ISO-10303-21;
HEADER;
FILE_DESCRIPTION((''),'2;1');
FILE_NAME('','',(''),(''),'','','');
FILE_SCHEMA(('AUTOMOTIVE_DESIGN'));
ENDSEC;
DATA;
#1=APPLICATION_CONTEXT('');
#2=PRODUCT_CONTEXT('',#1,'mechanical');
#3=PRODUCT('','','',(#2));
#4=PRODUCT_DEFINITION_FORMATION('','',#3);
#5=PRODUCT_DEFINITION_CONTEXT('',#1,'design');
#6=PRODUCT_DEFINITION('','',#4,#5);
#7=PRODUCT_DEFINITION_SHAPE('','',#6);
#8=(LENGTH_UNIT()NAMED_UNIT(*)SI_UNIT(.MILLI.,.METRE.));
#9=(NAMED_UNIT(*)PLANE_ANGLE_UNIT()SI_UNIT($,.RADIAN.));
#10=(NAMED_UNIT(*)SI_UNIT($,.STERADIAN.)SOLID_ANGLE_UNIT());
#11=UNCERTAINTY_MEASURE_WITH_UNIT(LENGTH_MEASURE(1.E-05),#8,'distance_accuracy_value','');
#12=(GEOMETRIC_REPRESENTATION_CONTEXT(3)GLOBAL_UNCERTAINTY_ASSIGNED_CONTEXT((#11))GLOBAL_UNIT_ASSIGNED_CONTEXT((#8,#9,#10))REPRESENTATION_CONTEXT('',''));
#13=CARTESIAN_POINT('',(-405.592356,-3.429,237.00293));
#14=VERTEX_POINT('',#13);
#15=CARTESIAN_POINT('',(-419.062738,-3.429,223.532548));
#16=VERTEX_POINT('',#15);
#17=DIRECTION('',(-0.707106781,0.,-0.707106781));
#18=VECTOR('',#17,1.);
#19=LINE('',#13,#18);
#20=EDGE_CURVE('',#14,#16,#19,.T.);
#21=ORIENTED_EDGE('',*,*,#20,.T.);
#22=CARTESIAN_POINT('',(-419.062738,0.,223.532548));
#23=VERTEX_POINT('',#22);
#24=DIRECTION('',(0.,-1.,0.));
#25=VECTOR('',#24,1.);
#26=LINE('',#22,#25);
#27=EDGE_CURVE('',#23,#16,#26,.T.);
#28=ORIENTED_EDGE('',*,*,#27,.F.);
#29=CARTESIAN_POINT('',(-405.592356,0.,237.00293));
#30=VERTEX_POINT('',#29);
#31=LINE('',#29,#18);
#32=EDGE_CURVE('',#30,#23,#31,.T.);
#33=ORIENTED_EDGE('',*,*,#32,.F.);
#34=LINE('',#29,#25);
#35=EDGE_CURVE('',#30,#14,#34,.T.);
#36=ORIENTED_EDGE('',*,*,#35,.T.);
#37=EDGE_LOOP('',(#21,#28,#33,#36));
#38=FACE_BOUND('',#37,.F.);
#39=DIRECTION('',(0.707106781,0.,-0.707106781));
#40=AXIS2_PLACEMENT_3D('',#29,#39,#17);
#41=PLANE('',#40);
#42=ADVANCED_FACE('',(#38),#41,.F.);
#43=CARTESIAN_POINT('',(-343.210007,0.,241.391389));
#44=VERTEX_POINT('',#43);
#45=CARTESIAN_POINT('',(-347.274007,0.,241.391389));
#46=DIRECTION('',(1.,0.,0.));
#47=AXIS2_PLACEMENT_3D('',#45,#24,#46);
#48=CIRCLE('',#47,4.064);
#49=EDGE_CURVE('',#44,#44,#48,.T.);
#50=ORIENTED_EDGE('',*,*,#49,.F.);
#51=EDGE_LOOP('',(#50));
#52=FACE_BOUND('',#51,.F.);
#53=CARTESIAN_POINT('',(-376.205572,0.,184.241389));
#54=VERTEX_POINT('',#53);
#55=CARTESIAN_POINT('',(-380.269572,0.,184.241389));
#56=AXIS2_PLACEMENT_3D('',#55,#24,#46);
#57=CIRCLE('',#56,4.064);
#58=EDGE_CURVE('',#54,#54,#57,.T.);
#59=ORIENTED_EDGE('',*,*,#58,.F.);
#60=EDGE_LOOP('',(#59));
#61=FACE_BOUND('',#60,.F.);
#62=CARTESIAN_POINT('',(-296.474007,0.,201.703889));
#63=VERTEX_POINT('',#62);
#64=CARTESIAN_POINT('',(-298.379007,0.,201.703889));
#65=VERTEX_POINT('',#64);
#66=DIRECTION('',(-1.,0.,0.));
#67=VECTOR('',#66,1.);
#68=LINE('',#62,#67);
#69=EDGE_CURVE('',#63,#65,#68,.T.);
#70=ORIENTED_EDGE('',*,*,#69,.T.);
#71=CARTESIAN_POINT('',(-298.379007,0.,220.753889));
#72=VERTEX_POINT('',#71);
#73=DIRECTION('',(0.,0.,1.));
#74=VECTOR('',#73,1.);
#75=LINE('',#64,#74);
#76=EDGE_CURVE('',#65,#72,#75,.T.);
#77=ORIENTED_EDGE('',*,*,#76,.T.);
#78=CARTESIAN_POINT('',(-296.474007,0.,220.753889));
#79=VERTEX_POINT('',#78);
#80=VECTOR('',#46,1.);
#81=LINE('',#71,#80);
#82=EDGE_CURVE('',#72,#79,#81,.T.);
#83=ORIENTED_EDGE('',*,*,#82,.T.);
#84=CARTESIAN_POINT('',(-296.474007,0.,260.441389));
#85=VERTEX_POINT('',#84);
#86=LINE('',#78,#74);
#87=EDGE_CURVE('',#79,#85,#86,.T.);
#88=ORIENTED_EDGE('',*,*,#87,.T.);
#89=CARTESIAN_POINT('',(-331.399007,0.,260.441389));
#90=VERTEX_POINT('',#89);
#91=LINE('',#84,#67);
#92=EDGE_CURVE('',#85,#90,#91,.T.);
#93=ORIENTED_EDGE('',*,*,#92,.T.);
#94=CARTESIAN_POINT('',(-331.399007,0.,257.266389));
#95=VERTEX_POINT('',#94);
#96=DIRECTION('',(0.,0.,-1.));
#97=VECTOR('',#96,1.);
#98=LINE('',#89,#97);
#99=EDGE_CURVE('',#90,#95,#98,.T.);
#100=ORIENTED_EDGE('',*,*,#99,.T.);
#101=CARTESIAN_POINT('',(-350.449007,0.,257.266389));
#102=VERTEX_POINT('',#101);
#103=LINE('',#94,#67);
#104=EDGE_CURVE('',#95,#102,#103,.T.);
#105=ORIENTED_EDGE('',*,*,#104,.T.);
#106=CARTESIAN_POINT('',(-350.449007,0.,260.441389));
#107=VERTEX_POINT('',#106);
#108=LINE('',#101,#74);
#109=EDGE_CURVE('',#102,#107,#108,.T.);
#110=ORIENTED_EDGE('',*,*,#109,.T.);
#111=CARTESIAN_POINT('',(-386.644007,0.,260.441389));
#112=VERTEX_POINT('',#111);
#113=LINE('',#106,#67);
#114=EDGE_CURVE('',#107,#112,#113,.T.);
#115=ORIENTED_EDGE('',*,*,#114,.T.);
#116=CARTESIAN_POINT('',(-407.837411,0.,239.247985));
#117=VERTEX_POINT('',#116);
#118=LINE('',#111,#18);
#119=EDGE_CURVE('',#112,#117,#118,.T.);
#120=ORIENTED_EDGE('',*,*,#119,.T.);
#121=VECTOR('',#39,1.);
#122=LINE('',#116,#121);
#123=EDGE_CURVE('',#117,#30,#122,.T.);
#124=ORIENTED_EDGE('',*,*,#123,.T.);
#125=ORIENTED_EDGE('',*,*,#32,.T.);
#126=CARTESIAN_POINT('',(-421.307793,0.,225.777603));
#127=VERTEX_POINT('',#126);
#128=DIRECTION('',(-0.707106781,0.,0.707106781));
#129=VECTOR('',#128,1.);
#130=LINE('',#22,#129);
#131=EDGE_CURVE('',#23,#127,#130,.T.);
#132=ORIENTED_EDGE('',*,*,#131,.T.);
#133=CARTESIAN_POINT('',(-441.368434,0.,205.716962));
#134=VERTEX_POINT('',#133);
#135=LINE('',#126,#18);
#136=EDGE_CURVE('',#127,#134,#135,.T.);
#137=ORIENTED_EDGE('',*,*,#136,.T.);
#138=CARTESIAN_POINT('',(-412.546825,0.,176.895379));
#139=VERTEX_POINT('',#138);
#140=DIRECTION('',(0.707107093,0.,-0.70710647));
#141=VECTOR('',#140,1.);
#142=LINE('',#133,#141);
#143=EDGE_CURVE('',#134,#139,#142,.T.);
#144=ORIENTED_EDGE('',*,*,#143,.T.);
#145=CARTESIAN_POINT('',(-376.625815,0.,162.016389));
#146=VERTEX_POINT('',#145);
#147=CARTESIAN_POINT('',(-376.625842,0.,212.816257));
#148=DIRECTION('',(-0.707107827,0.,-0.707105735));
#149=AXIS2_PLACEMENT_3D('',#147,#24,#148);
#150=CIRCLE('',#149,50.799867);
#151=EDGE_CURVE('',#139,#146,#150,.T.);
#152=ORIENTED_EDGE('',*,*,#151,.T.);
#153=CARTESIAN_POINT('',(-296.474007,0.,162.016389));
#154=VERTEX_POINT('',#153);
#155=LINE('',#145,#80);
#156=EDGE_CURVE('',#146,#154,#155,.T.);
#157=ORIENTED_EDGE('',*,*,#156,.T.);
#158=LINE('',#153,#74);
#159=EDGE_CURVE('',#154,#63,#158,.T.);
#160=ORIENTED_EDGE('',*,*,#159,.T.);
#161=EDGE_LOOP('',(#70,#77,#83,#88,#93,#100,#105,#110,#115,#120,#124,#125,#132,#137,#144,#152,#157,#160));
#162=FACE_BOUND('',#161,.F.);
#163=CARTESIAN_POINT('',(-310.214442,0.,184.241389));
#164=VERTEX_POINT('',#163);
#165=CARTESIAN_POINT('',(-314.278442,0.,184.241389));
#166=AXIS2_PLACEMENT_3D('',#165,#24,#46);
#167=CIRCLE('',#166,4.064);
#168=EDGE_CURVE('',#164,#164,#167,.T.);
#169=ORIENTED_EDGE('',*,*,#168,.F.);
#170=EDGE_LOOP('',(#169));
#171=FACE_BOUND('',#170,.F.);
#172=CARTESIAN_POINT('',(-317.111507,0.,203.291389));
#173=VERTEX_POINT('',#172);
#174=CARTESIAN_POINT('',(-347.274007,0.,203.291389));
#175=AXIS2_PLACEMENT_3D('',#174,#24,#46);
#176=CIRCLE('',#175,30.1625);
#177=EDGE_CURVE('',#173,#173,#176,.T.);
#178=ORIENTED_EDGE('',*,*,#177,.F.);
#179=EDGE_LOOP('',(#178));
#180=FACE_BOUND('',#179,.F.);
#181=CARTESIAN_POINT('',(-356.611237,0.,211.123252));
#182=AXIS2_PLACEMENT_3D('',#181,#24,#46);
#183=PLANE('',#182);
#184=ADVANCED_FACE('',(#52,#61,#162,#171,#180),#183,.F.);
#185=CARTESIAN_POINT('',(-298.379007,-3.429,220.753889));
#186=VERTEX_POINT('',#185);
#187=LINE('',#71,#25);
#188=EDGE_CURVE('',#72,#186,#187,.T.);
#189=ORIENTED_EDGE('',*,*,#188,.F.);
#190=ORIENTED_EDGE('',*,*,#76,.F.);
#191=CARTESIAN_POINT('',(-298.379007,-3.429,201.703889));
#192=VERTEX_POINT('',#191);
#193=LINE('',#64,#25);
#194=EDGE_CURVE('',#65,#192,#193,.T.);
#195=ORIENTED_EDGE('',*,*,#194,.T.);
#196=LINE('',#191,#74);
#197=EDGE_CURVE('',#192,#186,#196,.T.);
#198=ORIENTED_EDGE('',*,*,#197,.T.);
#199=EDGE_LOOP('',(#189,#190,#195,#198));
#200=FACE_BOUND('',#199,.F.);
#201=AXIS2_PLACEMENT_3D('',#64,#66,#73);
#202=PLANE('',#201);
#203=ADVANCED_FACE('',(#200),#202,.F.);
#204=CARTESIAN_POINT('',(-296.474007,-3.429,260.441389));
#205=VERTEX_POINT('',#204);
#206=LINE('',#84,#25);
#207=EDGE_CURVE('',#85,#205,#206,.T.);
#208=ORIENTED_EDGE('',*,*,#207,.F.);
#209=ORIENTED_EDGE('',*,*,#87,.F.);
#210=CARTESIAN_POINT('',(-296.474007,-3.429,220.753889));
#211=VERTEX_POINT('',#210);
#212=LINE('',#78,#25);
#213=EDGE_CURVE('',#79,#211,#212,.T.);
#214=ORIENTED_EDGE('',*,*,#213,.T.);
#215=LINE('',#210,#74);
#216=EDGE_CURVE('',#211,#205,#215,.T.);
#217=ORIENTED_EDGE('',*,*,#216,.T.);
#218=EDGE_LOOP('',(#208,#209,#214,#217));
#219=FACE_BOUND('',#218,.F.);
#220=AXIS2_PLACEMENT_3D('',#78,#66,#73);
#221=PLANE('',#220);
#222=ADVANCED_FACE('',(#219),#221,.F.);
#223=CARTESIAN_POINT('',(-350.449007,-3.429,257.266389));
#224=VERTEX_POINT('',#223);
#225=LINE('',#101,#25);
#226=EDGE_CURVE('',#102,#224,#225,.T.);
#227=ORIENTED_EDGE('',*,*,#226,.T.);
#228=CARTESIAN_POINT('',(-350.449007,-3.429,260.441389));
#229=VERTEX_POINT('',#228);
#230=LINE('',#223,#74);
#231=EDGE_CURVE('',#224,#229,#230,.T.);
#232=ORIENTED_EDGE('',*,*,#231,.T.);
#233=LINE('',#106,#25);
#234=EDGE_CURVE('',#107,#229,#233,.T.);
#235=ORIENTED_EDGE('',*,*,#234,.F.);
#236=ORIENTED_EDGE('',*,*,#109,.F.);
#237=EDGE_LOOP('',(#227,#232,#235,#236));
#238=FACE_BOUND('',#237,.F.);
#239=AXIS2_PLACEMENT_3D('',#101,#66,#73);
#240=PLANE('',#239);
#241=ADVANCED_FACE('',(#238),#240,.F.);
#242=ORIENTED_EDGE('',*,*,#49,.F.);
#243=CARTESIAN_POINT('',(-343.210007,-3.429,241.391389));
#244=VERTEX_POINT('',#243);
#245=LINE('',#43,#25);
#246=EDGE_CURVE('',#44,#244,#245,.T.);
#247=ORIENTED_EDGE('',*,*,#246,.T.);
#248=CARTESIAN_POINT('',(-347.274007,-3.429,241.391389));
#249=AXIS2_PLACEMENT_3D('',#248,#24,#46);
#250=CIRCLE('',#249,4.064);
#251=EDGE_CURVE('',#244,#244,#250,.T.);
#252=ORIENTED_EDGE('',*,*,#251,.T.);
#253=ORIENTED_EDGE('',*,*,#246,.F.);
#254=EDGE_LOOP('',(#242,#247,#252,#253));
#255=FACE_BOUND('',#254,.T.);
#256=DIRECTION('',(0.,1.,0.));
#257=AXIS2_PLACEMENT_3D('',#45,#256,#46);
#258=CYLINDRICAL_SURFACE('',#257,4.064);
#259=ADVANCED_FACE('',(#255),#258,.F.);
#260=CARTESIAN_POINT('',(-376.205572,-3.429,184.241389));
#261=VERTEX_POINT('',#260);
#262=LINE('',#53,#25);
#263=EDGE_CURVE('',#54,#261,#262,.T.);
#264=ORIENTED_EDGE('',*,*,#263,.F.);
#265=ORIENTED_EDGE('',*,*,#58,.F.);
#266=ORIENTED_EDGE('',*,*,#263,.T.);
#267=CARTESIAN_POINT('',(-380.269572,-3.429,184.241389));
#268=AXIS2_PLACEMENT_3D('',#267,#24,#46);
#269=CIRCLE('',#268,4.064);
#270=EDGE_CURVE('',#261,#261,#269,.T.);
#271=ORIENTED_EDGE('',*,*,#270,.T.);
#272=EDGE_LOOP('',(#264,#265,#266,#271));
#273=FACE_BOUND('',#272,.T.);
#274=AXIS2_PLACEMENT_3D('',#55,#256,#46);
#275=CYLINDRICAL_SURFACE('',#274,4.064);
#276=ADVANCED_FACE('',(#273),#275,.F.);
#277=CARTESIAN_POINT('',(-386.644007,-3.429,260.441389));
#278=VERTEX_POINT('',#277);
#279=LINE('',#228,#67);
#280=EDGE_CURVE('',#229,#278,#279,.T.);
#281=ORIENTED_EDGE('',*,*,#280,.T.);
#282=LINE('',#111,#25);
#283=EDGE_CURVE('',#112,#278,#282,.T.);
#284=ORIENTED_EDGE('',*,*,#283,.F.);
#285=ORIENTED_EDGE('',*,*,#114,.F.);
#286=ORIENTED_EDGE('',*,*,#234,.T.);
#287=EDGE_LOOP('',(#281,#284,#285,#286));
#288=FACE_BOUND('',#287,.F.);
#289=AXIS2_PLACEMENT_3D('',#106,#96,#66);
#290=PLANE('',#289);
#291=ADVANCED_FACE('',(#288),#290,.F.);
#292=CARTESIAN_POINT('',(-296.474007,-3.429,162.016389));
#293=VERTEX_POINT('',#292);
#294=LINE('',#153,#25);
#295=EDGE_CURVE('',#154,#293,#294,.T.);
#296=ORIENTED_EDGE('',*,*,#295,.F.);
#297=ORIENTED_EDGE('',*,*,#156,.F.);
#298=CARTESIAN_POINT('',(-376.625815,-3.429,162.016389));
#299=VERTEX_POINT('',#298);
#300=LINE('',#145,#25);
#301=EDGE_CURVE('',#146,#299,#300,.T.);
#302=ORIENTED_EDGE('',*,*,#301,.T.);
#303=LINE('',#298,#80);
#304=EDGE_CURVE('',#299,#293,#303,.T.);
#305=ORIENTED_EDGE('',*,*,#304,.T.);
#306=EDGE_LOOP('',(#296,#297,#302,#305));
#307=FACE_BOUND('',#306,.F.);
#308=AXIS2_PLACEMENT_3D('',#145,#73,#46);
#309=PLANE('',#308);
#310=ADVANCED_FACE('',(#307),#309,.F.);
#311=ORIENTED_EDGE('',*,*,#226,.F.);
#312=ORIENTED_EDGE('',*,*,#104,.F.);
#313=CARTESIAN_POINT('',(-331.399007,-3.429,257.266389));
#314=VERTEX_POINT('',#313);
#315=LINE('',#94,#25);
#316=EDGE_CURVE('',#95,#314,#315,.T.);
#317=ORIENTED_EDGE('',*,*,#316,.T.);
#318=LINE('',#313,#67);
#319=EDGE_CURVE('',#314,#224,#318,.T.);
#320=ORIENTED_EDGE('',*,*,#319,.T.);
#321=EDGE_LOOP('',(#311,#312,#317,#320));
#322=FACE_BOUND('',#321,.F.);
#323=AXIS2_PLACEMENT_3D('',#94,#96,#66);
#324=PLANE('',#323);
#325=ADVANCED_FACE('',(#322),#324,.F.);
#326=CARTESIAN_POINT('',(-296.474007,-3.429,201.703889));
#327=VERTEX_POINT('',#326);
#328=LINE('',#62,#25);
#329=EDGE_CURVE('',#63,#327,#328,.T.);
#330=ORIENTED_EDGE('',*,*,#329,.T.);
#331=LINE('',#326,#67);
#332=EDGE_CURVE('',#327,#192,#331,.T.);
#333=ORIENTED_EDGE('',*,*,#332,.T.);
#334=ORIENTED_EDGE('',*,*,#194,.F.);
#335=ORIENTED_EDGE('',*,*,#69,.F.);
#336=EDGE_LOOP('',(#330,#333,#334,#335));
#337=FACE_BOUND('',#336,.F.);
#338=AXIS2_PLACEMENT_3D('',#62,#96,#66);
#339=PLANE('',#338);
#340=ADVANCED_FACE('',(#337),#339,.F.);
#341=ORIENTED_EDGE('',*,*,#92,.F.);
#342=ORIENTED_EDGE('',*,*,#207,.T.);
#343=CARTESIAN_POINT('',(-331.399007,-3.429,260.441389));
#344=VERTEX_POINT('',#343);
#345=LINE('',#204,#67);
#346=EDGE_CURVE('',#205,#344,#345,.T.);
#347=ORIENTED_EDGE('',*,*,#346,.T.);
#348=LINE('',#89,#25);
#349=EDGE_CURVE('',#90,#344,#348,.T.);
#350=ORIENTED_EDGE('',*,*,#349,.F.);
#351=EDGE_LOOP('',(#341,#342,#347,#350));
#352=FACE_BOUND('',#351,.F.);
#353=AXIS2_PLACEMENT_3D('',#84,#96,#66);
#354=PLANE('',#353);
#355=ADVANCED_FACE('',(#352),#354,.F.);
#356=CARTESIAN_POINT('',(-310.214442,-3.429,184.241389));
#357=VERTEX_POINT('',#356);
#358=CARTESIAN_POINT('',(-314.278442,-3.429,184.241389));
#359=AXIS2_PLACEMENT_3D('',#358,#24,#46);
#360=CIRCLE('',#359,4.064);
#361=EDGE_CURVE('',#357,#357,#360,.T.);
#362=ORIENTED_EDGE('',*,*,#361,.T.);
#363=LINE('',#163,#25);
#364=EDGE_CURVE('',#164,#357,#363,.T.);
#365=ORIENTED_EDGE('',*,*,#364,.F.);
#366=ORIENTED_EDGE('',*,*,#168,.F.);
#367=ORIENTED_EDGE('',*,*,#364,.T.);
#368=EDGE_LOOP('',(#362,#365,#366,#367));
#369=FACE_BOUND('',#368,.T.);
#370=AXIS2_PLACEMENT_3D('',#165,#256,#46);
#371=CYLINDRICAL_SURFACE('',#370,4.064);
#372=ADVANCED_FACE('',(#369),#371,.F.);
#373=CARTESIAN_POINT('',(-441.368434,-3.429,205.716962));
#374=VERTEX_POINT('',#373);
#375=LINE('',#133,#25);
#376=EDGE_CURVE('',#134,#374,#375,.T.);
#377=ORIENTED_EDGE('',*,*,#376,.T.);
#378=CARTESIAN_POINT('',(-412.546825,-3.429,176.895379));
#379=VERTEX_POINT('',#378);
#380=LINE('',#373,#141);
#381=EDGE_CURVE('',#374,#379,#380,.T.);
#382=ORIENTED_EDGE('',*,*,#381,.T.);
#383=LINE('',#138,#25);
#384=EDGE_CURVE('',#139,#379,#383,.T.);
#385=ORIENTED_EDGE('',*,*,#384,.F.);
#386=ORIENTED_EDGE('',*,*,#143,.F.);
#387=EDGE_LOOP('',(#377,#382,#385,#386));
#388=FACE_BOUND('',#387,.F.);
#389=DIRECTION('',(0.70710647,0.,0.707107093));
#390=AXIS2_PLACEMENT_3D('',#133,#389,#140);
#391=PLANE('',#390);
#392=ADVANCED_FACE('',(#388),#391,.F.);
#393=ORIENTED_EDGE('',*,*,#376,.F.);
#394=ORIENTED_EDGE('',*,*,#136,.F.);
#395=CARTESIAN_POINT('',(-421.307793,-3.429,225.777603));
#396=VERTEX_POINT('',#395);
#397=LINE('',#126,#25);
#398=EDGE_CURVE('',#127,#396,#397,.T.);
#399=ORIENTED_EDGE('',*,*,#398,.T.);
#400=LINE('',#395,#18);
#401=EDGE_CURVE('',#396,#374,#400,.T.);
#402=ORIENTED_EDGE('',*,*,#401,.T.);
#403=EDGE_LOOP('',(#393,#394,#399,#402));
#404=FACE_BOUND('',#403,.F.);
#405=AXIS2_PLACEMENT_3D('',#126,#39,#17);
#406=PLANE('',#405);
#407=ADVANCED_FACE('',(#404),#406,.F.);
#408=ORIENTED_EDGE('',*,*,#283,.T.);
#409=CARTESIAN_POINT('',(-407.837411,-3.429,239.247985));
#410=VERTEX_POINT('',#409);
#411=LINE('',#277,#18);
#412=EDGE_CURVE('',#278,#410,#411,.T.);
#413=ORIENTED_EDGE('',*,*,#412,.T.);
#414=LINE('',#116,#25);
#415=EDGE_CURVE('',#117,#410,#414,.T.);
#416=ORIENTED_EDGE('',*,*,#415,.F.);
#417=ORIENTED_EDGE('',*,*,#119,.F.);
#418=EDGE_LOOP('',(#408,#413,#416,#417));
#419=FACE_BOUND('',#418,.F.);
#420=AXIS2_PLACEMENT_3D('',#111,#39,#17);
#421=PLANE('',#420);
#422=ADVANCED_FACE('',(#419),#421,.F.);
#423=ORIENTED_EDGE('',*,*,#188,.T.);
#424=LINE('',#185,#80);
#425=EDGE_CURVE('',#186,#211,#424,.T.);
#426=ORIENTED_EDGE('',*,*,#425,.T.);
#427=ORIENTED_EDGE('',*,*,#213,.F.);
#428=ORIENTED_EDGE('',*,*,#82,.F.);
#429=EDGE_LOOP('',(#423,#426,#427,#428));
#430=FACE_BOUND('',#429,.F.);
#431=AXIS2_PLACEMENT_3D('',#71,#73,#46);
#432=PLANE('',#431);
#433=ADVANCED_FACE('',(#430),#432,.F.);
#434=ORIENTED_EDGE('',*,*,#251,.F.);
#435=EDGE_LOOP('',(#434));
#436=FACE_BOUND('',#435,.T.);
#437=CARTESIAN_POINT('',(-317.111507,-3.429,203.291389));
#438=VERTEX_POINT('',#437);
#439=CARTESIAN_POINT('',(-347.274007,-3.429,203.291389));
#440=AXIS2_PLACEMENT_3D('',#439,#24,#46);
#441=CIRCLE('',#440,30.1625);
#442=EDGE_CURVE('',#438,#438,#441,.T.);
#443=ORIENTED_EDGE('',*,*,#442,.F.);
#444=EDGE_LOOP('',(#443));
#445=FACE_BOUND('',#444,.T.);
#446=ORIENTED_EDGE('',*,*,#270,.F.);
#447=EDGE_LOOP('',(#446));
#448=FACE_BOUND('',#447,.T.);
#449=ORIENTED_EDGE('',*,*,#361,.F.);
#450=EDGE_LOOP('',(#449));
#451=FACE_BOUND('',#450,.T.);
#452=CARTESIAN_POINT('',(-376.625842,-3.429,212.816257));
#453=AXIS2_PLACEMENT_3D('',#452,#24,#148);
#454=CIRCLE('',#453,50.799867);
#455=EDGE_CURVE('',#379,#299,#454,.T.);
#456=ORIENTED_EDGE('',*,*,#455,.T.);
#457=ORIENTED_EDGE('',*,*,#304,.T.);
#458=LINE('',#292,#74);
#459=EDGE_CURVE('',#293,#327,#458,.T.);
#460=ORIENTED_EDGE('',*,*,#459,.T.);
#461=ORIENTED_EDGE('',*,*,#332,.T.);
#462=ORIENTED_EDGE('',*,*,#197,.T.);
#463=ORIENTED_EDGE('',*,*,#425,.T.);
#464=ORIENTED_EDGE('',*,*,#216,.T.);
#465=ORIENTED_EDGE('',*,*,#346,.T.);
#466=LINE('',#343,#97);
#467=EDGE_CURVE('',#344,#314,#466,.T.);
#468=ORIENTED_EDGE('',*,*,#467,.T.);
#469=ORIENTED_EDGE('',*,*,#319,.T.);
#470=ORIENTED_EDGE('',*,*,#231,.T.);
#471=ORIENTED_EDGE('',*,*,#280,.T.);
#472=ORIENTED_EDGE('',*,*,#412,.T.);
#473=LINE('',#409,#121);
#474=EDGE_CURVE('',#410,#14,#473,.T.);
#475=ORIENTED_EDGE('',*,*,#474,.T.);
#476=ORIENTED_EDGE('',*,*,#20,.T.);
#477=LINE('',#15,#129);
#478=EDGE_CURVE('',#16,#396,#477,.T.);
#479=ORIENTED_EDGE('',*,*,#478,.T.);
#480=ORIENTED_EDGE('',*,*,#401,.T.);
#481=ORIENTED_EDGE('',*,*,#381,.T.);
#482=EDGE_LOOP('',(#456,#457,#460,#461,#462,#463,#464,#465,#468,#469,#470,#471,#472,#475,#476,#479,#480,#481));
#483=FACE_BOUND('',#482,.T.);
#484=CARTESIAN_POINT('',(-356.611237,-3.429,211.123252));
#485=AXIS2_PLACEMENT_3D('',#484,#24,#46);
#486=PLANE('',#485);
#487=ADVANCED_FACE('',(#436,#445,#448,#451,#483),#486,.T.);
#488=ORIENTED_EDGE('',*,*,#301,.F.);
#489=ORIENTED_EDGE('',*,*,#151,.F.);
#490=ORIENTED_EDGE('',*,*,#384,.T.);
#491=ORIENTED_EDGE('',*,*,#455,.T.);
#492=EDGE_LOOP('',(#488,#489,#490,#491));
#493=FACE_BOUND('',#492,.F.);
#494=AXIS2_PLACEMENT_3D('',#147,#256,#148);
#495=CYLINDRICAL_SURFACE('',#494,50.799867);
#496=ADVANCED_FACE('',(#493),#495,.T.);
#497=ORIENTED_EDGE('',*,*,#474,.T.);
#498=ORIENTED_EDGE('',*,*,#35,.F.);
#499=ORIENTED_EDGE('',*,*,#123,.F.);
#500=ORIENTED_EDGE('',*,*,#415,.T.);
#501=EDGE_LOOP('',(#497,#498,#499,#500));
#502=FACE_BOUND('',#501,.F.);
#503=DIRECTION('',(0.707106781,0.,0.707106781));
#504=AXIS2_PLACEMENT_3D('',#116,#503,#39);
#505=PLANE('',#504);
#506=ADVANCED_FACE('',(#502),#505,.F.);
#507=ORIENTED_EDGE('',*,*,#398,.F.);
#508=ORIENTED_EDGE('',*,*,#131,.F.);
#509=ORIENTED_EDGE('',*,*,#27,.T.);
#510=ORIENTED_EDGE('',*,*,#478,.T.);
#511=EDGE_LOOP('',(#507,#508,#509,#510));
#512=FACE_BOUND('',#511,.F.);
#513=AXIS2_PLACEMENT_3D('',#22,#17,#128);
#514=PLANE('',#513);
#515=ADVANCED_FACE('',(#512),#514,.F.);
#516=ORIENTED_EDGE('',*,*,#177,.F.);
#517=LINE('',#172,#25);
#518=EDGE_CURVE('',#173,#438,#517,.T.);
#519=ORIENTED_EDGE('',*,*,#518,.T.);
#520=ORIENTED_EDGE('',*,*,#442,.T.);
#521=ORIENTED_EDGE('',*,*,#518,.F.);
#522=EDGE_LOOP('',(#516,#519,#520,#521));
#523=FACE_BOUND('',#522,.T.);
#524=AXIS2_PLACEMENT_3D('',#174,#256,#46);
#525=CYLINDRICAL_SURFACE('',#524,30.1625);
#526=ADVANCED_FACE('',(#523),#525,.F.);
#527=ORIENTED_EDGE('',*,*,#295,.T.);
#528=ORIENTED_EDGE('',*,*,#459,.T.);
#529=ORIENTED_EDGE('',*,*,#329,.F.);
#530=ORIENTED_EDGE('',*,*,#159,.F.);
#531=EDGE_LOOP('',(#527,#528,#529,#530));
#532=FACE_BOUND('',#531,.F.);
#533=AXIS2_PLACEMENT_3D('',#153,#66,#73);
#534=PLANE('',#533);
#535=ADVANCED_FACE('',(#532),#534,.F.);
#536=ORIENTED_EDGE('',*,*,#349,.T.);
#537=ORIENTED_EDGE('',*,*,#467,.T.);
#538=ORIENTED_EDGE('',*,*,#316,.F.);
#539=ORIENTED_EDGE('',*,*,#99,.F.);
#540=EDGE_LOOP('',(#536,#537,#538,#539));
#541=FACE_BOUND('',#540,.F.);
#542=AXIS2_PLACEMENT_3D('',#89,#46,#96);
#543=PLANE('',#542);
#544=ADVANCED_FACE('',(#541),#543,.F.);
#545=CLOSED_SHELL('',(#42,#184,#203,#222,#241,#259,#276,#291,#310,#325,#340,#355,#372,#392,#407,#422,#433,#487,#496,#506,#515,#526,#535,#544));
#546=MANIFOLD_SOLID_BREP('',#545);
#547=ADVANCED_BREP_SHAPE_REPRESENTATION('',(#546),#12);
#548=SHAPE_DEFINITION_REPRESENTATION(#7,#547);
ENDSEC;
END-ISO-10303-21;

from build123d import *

# Parameters (mm, degrees)
F0_R     = 4.064
F0_R_2   = 30.1625
F1_DEPTH = 3.429


# Not quite as in the source:
# - ends of sketch curves that miss each other by under 0.0002 mm in the source are joined


with BuildPart() as f1:
    # F0 (on Front) → F1 (new body)
    with BuildSketch(Plane.XZ):
        with BuildLine():
            Line((-405.5923562, 237.0029296), (-419.0627382, 223.5325476))
            Line((-419.0627382, 223.5325476), (-421.3077934, 225.7776028))
            Line((-421.3077934, 225.7776028), (-441.368434, 205.7169622))
            Line((-441.368434, 205.7169622), (-412.5468254, 176.895379))
            ThreePointArc((-412.5468254, 176.895379), (-396.0661335641, 165.8833089484), (-376.6258152, 162.0163892))
            Line((-376.6258152, 162.0163892), (-296.474007, 162.0163892))
            Line((-296.474007, 162.0163892), (-296.474007, 201.7038892))
            Line((-296.474007, 201.7038892), (-298.379007, 201.7038892))
            Line((-298.379007, 201.7038892), (-298.379007, 220.7538892))
            Line((-298.379007, 220.7538892), (-296.474007, 220.7538892))
            Line((-296.474007, 220.7538892), (-296.474007, 260.4413892))
            Line((-296.474007, 260.4413892), (-331.399007, 260.4413892))
            Line((-331.399007, 260.4413892), (-331.399007, 257.2663892))
            Line((-331.399007, 257.2663892), (-350.449007, 257.2663892))
            Line((-350.449007, 257.2663892), (-350.449007, 260.4413892))
            Line((-350.449007, 260.4413892), (-386.644007, 260.4413892))
            Line((-386.644007, 260.4413892), (-407.8374114, 239.2479848))
            Line((-407.8374114, 239.2479848), (-405.5923562, 237.0029296))
        make_face()
        with Locations((-380.2695722, 184.2413892)):
            Circle(F0_R, mode=Mode.SUBTRACT)
        with Locations((-314.2784418, 184.2413892)):
            Circle(F0_R, mode=Mode.SUBTRACT)
        with Locations((-347.274007, 203.2913892)):
            Circle(F0_R_2, mode=Mode.SUBTRACT)
        with Locations((-347.274007, 241.3913892)):
            Circle(F0_R, mode=Mode.SUBTRACT)
    extrude(amount=F1_DEPTH)


solid = f1.part
